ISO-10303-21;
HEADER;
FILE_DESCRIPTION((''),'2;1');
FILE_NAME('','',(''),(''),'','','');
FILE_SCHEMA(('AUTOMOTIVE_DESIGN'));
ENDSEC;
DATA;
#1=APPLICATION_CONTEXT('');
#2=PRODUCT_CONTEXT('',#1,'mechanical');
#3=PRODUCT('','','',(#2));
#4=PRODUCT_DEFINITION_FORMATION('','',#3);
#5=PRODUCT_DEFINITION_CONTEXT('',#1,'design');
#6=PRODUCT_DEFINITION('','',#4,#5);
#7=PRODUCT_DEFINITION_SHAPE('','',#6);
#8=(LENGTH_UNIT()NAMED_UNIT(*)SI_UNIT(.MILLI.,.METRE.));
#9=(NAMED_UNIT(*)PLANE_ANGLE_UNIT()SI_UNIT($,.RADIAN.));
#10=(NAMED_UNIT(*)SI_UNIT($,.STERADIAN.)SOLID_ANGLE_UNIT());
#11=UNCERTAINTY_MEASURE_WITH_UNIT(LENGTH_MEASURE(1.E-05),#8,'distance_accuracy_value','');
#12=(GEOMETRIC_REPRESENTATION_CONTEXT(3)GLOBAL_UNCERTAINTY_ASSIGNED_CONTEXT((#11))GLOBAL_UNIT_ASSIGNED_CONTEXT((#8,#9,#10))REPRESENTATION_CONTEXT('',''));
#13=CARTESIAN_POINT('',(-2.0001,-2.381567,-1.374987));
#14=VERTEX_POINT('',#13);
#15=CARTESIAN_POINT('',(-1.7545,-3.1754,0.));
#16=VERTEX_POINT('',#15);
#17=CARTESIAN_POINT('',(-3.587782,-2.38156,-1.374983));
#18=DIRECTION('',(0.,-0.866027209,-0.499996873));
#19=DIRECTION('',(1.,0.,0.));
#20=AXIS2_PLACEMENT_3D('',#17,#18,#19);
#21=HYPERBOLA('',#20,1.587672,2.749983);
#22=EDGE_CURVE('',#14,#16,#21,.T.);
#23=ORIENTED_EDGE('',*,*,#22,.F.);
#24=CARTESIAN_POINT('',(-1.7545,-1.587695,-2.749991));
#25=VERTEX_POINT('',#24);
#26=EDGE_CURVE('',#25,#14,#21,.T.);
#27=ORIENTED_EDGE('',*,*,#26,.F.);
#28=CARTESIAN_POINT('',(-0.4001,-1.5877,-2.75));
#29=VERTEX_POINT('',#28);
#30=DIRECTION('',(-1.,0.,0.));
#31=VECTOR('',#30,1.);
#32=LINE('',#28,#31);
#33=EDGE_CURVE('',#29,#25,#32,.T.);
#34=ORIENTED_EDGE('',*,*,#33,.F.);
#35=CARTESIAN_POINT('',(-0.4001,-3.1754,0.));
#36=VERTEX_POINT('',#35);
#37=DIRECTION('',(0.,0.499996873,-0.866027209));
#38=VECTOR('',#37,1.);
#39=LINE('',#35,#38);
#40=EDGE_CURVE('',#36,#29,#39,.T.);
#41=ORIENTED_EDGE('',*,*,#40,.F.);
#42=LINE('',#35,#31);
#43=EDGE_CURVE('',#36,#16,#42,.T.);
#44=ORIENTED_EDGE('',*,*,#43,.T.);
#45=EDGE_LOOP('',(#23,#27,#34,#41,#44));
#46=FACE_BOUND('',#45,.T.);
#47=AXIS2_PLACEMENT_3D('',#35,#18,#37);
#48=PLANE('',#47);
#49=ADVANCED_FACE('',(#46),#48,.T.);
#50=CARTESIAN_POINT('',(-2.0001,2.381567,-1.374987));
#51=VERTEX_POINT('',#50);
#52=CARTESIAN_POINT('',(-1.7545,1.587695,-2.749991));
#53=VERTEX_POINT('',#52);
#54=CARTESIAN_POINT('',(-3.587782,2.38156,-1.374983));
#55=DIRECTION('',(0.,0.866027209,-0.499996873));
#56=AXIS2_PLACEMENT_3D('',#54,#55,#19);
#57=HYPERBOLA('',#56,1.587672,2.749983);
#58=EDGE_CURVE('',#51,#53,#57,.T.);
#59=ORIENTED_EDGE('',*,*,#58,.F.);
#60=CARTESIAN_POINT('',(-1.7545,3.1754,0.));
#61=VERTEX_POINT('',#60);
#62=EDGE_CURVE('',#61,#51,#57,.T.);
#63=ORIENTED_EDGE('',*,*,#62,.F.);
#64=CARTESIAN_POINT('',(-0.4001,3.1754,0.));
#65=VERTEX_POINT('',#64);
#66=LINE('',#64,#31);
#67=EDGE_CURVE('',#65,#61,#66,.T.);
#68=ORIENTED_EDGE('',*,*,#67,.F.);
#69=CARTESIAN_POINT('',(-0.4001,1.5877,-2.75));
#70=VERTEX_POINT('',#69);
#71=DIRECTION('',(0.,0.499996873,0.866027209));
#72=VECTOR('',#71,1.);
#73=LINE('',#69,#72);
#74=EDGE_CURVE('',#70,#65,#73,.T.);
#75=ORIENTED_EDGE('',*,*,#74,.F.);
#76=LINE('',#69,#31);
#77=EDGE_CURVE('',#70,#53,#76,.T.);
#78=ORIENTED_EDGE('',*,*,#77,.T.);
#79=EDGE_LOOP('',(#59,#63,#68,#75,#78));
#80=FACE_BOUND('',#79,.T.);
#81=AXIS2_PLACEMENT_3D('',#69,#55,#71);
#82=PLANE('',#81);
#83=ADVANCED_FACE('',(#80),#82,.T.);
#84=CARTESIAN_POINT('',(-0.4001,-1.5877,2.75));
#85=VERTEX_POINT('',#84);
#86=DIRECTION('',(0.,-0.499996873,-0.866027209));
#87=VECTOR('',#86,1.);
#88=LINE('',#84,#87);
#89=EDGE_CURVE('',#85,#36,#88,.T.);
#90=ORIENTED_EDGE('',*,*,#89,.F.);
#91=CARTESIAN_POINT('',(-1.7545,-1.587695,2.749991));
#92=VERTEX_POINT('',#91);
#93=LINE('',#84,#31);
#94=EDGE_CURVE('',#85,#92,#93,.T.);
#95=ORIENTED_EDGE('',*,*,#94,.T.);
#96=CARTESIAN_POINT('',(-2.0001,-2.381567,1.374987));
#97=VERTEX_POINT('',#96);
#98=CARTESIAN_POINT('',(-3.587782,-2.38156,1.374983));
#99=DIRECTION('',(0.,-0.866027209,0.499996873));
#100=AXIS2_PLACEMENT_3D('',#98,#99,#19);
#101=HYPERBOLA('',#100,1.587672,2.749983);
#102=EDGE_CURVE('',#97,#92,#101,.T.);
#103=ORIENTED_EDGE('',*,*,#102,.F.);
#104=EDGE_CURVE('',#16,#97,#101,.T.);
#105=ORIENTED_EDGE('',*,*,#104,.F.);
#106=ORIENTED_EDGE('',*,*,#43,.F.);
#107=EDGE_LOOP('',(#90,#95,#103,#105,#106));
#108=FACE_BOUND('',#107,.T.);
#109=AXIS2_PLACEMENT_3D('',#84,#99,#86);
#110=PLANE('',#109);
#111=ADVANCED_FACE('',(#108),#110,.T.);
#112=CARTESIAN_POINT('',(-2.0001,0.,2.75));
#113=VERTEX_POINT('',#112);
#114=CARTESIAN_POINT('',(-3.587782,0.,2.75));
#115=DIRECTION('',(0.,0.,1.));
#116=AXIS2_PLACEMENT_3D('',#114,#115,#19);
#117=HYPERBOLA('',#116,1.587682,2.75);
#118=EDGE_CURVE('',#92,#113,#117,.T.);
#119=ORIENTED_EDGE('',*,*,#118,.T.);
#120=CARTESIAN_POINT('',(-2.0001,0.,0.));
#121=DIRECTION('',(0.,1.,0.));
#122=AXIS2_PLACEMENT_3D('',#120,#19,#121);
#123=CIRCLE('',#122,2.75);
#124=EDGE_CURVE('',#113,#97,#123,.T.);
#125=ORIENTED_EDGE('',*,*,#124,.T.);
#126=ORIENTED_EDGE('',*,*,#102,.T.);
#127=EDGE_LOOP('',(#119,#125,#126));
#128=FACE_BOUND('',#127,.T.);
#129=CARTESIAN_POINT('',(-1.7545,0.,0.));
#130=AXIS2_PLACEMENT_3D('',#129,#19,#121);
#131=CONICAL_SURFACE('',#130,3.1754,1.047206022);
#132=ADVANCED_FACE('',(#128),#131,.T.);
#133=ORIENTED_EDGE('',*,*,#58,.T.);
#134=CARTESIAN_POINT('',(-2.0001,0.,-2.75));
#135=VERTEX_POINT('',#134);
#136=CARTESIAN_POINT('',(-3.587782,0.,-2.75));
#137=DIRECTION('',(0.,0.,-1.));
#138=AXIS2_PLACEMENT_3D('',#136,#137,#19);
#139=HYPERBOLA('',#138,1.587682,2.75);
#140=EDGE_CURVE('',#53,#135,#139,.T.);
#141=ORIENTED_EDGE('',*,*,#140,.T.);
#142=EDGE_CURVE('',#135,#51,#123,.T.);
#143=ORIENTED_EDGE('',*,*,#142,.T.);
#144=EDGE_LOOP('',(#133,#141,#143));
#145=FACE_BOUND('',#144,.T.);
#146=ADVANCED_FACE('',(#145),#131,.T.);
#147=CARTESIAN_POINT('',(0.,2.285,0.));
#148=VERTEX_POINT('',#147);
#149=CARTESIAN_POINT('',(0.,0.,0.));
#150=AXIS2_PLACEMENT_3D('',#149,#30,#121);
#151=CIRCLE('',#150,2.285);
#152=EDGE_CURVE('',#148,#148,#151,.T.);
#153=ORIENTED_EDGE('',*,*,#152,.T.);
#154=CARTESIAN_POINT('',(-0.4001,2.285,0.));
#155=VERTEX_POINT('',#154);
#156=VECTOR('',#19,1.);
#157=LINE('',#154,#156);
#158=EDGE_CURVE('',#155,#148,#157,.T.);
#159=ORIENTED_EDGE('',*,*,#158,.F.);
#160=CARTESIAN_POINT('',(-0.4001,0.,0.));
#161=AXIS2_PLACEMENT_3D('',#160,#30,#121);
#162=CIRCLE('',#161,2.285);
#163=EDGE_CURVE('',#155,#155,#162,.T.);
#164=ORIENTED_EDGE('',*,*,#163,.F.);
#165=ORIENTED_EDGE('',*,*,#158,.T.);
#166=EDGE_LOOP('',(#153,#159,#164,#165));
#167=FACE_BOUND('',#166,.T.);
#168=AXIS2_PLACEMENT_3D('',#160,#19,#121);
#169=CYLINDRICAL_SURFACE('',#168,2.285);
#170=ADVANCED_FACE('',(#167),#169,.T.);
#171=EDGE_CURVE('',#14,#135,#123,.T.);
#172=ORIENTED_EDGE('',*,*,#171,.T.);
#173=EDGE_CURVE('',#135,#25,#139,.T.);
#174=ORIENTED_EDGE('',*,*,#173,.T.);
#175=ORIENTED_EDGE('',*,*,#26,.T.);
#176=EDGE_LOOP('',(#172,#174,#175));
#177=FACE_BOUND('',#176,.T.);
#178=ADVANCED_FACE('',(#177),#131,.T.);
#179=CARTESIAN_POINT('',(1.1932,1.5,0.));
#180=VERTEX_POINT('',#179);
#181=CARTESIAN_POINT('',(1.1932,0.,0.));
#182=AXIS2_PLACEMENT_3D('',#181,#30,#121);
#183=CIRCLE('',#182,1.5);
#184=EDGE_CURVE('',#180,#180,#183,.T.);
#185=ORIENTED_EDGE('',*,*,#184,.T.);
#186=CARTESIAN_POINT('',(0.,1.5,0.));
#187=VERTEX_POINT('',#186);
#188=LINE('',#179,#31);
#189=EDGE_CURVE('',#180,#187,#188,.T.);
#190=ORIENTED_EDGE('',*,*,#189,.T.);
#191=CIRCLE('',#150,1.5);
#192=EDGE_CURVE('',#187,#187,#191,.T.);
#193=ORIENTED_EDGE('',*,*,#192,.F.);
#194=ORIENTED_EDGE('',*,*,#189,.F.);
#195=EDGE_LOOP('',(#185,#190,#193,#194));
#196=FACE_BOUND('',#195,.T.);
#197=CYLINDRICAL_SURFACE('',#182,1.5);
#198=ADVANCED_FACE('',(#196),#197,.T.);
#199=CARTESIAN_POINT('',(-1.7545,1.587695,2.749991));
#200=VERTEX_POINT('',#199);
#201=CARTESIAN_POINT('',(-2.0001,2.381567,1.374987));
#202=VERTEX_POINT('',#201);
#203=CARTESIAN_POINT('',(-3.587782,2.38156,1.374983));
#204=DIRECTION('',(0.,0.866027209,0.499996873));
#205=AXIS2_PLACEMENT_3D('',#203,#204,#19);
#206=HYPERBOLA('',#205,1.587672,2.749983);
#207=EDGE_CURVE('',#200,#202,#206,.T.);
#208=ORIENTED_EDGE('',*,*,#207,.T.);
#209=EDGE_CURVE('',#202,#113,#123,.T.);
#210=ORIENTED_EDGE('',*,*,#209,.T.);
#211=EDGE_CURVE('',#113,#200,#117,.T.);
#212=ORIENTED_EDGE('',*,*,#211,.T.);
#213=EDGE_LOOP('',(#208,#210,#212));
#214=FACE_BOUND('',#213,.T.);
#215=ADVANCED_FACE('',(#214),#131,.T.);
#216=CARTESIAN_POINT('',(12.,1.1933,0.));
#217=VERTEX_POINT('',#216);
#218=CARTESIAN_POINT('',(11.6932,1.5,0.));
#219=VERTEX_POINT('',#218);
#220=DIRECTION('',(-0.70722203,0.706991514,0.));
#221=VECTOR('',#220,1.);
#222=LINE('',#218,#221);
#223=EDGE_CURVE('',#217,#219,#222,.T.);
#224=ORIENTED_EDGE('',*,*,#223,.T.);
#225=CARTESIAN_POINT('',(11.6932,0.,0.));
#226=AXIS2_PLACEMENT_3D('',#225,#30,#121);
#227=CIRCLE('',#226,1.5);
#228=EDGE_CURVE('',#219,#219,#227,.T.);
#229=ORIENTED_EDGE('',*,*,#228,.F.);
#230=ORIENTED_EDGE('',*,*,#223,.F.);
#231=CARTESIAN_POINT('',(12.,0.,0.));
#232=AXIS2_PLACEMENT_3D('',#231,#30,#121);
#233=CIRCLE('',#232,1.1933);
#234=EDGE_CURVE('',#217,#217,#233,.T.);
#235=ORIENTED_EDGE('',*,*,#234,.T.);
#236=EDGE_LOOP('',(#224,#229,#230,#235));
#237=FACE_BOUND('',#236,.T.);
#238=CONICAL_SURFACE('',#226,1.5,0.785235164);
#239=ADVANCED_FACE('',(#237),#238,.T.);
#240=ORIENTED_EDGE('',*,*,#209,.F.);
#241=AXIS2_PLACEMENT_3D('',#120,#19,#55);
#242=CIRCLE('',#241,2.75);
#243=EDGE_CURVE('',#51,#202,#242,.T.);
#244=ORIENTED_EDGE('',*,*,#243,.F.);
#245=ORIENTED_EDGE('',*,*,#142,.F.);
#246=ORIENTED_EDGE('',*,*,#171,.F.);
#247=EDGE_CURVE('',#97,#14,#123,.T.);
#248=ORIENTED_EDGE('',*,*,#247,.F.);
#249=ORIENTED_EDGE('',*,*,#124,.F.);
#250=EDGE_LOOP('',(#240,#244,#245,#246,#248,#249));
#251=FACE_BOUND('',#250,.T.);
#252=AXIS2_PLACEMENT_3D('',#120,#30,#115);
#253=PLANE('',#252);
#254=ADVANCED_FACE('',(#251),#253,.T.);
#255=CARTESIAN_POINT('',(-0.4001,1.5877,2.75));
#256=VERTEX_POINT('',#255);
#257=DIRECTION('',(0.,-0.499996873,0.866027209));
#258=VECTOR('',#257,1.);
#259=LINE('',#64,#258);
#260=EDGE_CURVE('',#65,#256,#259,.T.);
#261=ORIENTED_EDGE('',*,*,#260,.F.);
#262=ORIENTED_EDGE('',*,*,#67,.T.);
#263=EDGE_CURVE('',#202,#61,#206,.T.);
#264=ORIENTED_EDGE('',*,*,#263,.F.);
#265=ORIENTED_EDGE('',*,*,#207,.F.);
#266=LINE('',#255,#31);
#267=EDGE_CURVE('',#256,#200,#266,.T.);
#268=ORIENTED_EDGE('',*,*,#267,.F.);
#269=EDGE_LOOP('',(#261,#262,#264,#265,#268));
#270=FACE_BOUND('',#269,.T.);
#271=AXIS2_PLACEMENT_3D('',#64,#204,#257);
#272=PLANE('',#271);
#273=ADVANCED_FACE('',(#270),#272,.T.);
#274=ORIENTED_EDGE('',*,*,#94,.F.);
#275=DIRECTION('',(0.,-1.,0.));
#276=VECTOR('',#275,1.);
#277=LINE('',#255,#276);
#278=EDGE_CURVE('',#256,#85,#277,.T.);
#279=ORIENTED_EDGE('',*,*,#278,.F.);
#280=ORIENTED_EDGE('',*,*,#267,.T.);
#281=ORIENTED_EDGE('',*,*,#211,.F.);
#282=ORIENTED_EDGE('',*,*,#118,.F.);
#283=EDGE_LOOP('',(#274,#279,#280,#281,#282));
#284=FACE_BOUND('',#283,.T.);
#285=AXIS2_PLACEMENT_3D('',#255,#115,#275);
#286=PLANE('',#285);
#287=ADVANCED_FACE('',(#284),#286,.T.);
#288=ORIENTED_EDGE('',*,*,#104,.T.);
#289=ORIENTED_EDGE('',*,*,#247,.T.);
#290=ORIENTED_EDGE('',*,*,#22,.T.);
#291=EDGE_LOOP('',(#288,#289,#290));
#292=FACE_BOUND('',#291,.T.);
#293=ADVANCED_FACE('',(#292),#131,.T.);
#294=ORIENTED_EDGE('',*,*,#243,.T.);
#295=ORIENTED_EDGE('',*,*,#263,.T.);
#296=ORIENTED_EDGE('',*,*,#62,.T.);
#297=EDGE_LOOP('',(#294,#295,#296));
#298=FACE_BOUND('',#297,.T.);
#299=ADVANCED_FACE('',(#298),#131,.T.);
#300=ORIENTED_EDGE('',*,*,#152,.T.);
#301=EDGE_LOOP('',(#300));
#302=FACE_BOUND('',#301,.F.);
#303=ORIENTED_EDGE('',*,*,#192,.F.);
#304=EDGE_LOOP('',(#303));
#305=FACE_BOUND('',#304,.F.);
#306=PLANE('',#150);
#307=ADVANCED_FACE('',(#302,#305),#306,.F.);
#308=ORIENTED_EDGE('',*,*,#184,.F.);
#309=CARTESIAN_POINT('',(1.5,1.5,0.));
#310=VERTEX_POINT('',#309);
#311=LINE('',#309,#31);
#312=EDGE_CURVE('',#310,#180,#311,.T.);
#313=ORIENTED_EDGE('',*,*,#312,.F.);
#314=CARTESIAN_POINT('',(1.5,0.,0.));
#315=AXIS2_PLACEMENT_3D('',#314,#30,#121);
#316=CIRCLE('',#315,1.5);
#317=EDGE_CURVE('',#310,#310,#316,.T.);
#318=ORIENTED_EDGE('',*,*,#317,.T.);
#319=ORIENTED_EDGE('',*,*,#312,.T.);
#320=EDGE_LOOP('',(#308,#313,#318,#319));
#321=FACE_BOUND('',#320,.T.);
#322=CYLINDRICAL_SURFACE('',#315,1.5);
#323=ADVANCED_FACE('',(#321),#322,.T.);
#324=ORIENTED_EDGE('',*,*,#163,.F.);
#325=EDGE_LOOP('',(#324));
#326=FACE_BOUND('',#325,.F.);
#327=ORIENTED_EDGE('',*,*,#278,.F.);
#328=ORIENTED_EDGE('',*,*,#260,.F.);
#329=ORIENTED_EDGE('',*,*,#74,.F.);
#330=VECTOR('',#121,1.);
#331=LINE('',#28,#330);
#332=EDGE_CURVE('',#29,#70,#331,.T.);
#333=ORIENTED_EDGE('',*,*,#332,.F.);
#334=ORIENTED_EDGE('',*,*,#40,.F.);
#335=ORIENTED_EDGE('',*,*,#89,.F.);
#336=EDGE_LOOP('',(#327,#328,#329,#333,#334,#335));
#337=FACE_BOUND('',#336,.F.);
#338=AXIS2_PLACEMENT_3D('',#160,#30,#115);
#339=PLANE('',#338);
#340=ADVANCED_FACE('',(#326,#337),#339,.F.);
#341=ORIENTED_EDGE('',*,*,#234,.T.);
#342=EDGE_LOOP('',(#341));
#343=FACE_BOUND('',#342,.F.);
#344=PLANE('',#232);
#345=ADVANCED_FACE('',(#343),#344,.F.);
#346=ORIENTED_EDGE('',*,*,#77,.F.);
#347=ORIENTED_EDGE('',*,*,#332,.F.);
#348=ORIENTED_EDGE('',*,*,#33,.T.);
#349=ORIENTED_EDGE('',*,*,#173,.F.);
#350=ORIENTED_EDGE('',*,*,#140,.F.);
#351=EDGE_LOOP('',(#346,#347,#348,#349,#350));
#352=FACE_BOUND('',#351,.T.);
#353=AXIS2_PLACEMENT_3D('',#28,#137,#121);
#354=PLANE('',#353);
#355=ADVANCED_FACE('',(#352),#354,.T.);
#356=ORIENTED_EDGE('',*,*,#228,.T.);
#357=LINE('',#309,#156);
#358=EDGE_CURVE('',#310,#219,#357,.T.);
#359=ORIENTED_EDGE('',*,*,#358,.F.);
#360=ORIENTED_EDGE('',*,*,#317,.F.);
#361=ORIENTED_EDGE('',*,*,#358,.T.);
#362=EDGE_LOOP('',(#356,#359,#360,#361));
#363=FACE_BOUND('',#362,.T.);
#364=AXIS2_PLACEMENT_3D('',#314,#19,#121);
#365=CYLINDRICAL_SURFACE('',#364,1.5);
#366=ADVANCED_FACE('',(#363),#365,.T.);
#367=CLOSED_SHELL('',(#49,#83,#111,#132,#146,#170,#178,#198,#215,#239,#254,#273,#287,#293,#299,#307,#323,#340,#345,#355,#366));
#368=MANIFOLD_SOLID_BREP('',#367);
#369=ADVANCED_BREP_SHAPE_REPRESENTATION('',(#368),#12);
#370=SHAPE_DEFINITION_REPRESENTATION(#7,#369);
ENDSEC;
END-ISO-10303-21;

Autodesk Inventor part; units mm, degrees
ref_plane "YZ Plane" through (0, 0, 0) normal (1, 0, 0) x (0, 1, 0)
ref_plane "XZ Plane" through (0, 0, 0) normal (0, 1, 0) x (-1, 0, 0)
sketch "Skizze1" plane through (0, 0, 0) normal (0, 0, 1) x (1, 0, 0)
  line L0 (0, 2.285) -> (0, 1.5)
  line L1 (1.5, 1.5) -> (12, 1.5)
  line L2 (12, 1.5) -> (12, 0)
  line L3 (12, 0) -> (-0.4001, 0)
  line L4 (-2.8801, 0) -> (14.48, 0) projected
  line L5 (-0.4001, 0) -> (-0.4001, 2.285)
  line L6 (-0.4001, 2.285) -> (0, 2.285)
  line L7 (1.5, 1.5) -> (1.1932, 1.5)
  line L8 (1.1932, 1.5) -> (0, 1.5)
  line L9 (0, -0.457) -> (0, 2.742) projected
  dimension "d0" = 12
  dimension "d1" = 10.5
  dimension "d2" = 3
  dimension "d9" = 0.4001
  dimension "d10" = 4.57
  dimension "d13" = 0.3068
  dimension "d14" = 3
revolve "Körper" add sketch "Skizze1" angle 360 about axis through (12, 0, 0) along (-1, 0, 0)
sketch "Skizze2" plane through (-0.4001, 0, 0) normal (-1, 0, 0) x (0, 0, 1)
  line L0 (0, 3.1754) -> (2.75, 1.5877)
  line L1 (2.75, 1.5877) -> (2.75, -1.5877)
  line L2 (2.75, -1.5877) -> (0, -3.1754)
  line L3 (0, -3.1754) -> (-2.75, -1.5877)
  line L4 (-2.75, -1.5877) -> (-2.75, 1.5877)
  line L5 (-2.75, 1.5877) -> (0, 3.1754)
  point P0 (0, 0)
  point P1 (0, 0)
  dimension "d11" = 5.5
extrude "Kopf" add sketch "Skizze2" along normal blind 1.6
sketch "Skizze4" plane through (0, 0, 0) normal (0, 0, 1) x (1, 0, 0)
  line L0 (-2.0001, 2.75) -> (-2.0001, 3.1754)
  line L1 (-2.0001, 3.1754) -> (-1.7545, 3.1754)
  line L2 (-1.7545, 3.1754) -> (-2.0001, 2.75)
  line L3 (-2.3201, 0) -> (-0.0801, 0) projected
  line L4 (-0.4001, 3.1754) -> (-2.0001, 3.1754) projected
  line L5 (-2.0001, 1.5877) -> (-2.0001, 3.1754) projected
  dimension "d5" = 30
  dimension "d19" = 5.5
revolve "Fase1" cut sketch "Skizze4" angle 360 about axis through (-10, 0, 0) along (1, 0, 0)
thread "Gewinde" size "M3x0.5" class "6g" standard "ISO Metric profile" length 10.5
chamfer "Fase2" distance 0.3067 distance2 0.3068 1 edges at (12, -1.5, 0) measured on face at (12, 0.0871, -0.3876)
ref_plane "Work Plane1" through (1.525, 0, 0) normal (0, 0, 1) x (1, 0, 0)
equation "\"d0\" = NLG"
equation "\"d1\" = GEL"
equation "\"d2\" = GD"
equation "\"d10\" = SD2"
equation "\"d14\" = BDM"
equation "\"d11\" = SW"
equation "\"d3\" = KOH - SD"
equation "\"d5\" = ANG1"
equation "\"d19\" = SW0"
equation "\"d15\" = GEL"
equation "\"d6\" = -0.5 * SPD + 0.5 * GD"
equation "\"NLG\" = 12"
equation "\"GD\" = NND"
equation "\"BDM\" = NND"
equation "\"KOH\" = 2"
equation "\"GEL\" = 10.5"
equation "\"SW\" = 5.5"
equation "\"SW0\" = SW"
equation "\"SPD\" = NND - 1.2269 * PTC"
equation "\"SD2\" = 4.57"
equation "\"SD\" = 0.4"
equation "\"ANG1\" = 30deg"
equation "\"GAL\" = 0.61345 * PTC"
equation "\"GUL\" = 0.61345 * PTC"
equation "\"RR\" = 0.1"
equation "\"GD1\" = THREADDIA - 1.2269 * PTC"
equation "\"THREADDIA\" = 3"
equation "\"SDH\" = SD2"
equation "\"SDHG\" = 1.5"
equation "\"TOA\" = 30deg"
equation "\"PTC\" = 0.5"
equation "\"NND\" = 3"
equation "\"E0\" = 6.3525"
properties part number "ISO 4017 - M3 x 12" material "Stahl, weich"
